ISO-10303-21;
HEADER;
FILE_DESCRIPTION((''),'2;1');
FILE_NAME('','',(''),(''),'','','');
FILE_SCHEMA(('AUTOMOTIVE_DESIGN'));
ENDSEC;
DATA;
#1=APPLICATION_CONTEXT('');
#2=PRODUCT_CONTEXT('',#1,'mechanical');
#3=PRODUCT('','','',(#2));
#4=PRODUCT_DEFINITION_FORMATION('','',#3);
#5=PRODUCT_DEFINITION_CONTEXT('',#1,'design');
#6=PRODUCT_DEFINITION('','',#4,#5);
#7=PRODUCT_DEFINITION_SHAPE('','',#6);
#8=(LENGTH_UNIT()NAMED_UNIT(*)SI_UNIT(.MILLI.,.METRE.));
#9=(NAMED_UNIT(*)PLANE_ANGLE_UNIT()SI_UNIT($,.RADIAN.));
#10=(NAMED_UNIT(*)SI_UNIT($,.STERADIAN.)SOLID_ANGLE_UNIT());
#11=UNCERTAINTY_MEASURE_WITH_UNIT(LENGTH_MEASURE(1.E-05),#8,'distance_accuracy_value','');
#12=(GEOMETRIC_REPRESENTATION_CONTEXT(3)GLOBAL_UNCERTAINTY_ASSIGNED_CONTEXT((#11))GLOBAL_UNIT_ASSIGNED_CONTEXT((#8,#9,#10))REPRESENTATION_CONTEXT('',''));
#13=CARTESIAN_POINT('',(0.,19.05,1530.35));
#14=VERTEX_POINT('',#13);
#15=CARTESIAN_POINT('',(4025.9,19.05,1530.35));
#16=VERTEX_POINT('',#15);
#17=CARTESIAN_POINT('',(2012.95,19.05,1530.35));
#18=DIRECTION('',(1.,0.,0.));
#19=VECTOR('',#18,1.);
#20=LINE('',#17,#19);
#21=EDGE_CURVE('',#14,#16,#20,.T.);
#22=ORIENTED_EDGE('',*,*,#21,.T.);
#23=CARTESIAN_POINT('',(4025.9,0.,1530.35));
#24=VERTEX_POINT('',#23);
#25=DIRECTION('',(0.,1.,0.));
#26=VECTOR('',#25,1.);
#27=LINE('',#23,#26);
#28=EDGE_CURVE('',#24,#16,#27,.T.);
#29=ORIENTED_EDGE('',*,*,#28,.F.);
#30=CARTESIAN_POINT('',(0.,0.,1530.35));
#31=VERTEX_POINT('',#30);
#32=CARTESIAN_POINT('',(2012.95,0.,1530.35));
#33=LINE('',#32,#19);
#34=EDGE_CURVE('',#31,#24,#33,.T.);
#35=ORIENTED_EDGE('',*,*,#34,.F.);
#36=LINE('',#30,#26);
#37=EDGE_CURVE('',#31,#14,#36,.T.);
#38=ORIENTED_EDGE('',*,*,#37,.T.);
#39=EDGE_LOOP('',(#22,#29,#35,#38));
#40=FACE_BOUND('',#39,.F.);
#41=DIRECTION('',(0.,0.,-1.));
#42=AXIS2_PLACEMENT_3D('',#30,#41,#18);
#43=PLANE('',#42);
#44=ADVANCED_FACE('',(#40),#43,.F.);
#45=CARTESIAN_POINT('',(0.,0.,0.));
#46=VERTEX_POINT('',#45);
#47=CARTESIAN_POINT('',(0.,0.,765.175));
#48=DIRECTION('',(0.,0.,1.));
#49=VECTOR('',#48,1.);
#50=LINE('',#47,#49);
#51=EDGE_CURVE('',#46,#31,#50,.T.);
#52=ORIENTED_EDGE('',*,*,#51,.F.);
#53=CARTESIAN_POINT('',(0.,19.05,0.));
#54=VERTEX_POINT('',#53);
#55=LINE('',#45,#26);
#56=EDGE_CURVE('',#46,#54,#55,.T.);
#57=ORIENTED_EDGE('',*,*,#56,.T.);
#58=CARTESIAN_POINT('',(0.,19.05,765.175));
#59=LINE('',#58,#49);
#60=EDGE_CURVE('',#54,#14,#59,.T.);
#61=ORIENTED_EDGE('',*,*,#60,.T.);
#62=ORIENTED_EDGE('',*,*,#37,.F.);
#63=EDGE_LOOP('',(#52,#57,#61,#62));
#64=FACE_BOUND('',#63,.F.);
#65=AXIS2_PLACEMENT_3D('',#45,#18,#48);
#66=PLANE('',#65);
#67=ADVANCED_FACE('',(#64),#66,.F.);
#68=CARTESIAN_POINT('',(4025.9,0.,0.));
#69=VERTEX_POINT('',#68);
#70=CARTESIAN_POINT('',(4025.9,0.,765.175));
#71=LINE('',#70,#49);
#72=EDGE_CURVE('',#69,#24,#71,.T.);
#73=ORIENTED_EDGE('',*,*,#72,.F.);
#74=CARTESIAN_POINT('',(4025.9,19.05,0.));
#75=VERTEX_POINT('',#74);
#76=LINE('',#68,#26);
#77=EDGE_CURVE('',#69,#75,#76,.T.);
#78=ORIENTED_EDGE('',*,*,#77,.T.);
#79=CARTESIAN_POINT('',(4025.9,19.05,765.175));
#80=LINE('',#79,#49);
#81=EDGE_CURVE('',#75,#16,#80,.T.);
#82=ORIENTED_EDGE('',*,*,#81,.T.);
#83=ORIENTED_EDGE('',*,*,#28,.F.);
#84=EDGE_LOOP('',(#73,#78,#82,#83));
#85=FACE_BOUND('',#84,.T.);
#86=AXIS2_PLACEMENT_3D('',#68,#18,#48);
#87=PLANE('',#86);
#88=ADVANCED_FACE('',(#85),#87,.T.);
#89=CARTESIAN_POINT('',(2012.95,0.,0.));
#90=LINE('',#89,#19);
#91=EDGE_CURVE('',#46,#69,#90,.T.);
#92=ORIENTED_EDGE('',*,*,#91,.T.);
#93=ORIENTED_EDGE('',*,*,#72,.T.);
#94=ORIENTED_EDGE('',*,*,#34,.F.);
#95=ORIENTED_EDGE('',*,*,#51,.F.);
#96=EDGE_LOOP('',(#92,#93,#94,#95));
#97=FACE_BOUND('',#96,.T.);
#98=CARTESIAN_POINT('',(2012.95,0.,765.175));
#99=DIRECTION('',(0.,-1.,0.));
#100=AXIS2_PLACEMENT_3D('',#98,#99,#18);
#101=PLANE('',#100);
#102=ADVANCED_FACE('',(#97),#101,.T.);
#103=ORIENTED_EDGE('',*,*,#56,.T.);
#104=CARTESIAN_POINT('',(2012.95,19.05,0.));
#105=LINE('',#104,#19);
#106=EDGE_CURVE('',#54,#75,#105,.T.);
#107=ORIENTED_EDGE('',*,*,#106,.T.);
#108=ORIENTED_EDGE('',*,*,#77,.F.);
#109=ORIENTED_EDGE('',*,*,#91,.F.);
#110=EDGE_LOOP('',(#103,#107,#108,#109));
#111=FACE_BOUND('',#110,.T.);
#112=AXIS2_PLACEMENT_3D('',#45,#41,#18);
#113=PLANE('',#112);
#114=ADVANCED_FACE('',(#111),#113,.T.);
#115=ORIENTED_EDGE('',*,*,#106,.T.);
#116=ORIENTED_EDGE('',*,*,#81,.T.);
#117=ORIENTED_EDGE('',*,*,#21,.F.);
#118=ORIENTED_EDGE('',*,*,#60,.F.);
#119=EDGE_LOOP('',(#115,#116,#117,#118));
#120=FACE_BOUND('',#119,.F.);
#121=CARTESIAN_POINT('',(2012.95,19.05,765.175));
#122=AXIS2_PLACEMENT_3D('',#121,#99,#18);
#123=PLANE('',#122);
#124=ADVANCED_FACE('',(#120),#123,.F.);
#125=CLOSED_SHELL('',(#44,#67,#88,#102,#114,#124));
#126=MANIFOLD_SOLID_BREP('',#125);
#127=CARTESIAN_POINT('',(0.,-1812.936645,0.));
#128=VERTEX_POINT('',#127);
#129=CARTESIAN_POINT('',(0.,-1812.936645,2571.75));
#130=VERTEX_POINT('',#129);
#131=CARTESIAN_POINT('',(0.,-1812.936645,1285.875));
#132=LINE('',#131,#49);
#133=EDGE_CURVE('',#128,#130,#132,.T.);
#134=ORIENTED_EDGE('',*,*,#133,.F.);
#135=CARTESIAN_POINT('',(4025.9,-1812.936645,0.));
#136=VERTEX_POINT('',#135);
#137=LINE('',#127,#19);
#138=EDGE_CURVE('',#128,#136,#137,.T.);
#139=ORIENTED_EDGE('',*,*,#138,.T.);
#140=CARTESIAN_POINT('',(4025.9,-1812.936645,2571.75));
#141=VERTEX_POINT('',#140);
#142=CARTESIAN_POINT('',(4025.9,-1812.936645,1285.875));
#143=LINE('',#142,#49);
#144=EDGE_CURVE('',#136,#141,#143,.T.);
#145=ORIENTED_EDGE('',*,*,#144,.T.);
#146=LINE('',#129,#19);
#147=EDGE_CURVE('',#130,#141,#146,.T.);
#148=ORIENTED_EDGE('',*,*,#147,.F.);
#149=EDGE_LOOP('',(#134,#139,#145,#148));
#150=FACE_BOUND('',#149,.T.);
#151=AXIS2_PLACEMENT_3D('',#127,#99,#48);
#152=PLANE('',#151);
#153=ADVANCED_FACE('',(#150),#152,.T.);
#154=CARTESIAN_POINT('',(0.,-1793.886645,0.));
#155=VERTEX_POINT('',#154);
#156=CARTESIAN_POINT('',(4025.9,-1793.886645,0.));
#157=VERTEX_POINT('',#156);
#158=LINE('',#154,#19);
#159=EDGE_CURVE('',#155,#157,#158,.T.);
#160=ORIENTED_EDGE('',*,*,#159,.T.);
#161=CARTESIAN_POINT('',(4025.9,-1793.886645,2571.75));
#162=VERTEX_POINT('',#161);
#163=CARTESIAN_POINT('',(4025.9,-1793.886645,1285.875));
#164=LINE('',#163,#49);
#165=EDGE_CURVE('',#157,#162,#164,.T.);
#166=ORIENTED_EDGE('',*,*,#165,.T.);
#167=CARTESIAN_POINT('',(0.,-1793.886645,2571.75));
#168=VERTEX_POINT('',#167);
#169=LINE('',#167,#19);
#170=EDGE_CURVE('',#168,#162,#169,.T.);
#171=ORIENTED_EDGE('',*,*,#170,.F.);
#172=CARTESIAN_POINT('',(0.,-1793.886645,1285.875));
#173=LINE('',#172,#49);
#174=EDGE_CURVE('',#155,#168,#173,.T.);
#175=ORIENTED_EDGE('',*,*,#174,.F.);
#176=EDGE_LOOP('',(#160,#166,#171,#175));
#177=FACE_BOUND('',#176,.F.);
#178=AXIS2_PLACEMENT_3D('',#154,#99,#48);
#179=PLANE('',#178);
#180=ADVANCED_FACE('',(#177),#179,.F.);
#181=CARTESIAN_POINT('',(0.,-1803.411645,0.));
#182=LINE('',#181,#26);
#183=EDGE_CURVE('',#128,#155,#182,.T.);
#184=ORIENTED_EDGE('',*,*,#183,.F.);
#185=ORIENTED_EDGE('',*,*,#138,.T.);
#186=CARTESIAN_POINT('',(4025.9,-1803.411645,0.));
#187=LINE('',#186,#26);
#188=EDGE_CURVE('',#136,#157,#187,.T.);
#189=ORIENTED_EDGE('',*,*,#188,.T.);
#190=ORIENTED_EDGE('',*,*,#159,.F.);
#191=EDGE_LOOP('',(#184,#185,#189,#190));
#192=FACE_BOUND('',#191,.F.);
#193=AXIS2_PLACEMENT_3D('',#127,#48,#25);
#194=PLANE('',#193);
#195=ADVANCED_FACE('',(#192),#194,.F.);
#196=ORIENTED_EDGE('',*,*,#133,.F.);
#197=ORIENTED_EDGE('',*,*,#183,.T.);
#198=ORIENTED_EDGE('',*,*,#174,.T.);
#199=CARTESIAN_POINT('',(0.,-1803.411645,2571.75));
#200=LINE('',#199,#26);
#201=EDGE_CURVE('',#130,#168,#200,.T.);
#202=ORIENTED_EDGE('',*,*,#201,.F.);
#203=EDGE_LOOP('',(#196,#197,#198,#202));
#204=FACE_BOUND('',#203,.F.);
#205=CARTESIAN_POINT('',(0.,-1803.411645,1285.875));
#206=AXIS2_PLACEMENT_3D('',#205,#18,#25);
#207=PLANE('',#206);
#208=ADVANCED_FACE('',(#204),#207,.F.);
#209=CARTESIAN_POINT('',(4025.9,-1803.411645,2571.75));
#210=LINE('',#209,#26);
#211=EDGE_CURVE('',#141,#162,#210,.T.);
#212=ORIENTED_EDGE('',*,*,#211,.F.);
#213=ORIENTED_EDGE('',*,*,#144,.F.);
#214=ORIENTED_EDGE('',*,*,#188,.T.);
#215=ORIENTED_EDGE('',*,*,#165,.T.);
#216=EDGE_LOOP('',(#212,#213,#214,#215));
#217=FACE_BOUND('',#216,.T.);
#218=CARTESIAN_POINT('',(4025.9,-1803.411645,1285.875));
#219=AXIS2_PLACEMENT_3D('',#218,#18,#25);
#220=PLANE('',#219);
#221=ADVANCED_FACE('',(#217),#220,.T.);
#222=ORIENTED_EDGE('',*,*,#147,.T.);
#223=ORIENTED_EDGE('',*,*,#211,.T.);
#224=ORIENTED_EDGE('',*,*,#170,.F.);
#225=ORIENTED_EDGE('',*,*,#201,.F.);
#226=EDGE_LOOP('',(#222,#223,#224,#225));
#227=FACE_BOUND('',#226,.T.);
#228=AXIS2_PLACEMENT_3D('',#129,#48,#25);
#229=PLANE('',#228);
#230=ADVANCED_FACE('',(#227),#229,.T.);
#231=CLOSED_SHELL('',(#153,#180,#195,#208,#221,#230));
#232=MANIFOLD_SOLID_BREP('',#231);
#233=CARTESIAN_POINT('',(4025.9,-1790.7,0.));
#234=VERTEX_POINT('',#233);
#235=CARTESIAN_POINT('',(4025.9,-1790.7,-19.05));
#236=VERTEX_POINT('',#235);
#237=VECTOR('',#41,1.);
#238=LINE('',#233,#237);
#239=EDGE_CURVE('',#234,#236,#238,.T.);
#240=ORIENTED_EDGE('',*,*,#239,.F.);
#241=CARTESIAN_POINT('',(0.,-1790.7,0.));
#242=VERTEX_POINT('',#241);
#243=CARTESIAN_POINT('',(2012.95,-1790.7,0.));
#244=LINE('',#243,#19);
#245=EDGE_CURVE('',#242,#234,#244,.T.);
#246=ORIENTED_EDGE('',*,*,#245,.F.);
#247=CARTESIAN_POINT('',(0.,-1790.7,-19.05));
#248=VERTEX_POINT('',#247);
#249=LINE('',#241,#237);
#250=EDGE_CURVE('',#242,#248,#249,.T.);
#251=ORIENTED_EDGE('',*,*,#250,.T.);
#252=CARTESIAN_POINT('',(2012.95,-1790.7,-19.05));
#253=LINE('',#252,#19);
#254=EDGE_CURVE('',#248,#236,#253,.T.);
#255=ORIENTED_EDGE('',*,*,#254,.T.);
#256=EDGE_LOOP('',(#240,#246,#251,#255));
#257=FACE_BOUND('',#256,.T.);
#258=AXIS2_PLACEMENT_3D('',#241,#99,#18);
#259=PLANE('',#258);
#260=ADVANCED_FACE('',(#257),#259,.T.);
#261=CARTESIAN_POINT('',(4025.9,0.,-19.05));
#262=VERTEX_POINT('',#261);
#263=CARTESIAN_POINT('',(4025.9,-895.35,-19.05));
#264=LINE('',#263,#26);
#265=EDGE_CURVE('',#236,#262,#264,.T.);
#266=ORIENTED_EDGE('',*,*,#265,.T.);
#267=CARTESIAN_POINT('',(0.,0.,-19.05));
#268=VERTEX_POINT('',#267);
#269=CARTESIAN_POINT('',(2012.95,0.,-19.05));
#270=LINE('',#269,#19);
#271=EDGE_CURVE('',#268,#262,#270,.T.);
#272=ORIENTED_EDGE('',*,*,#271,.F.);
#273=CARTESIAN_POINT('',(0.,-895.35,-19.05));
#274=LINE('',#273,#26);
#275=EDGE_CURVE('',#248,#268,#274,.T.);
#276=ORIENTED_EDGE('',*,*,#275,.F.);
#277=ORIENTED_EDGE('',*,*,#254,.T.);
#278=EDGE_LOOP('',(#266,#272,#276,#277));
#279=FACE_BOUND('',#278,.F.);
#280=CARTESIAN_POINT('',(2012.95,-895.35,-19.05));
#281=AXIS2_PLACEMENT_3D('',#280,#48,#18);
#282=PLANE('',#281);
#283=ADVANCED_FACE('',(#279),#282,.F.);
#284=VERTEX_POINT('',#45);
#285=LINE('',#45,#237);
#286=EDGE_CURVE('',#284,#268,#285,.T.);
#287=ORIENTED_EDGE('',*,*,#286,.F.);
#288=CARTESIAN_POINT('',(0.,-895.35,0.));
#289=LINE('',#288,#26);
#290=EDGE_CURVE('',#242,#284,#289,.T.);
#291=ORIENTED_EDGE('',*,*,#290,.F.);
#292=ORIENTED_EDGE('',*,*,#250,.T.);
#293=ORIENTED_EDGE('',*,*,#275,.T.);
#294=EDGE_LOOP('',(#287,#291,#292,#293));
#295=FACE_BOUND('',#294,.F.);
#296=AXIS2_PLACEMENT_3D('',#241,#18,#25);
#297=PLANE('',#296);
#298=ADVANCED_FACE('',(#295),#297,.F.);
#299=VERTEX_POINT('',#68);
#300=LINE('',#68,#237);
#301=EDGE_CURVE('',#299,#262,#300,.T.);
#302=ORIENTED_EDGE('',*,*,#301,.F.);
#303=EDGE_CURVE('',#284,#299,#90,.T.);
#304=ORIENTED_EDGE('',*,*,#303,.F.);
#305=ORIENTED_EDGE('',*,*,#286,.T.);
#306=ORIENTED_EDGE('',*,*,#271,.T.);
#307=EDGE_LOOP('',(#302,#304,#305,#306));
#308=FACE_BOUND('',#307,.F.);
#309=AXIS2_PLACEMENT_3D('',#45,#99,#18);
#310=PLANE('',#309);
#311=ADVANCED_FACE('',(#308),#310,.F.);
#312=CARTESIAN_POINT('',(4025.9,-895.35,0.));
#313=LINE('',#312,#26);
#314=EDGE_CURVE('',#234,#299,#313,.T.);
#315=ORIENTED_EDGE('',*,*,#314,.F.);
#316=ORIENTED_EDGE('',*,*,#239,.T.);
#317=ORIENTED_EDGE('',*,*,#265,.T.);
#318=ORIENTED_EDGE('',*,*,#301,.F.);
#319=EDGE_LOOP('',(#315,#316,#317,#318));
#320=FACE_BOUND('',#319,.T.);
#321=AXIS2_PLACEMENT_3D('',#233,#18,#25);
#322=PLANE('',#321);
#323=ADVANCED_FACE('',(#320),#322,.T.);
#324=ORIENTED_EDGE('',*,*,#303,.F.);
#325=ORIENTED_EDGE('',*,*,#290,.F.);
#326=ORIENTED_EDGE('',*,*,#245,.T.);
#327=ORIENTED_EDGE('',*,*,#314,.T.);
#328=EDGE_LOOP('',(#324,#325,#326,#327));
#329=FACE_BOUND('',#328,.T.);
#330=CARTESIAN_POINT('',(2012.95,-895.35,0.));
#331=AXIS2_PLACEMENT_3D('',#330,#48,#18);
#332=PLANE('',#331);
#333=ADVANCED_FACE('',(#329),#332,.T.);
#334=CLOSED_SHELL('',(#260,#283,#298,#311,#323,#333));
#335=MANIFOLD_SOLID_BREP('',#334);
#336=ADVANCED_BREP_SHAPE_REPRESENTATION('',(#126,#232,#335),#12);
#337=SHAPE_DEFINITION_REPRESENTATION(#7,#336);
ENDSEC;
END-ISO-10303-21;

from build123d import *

# Parameters (mm, degrees)
F0_W     = 4025.9
F0_H     = 1790.7
F1_DEPTH = 19.05
F2_W     = 4025.9
F2_H     = 1530.35
F3_DEPTH = 19.05
F4_W     = 19.05
F4_H     = 2571.75
F5_DEPTH = 4025.9


# Not quite as in the source:
# - a feature names something its author has since deleted; it is built from what else it names


with BuildPart() as f1:
    # F0 (on Top) → F1 (new body)
    with BuildSketch(Plane.XY):
        with Locations((2012.95, -895.35)):
            Rectangle(F0_W, F0_H)
    extrude(amount=-F1_DEPTH)


with BuildPart() as f3:
    # F2 (on Front) → F3 (new body)
    with BuildSketch(Plane.XZ):
        with Locations((2012.95, 765.175)):
            Rectangle(F2_W, F2_H)
    extrude(amount=-F3_DEPTH)


with BuildPart() as f5:
    # F4 (on Right) → F5 (new body)
    with BuildSketch(Plane.YZ):
        with Locations((-1803.4116451339, 1285.875)):
            Rectangle(F4_W, F4_H)
    extrude(amount=F5_DEPTH)


solid = Compound([f1.part, f3.part, f5.part])
